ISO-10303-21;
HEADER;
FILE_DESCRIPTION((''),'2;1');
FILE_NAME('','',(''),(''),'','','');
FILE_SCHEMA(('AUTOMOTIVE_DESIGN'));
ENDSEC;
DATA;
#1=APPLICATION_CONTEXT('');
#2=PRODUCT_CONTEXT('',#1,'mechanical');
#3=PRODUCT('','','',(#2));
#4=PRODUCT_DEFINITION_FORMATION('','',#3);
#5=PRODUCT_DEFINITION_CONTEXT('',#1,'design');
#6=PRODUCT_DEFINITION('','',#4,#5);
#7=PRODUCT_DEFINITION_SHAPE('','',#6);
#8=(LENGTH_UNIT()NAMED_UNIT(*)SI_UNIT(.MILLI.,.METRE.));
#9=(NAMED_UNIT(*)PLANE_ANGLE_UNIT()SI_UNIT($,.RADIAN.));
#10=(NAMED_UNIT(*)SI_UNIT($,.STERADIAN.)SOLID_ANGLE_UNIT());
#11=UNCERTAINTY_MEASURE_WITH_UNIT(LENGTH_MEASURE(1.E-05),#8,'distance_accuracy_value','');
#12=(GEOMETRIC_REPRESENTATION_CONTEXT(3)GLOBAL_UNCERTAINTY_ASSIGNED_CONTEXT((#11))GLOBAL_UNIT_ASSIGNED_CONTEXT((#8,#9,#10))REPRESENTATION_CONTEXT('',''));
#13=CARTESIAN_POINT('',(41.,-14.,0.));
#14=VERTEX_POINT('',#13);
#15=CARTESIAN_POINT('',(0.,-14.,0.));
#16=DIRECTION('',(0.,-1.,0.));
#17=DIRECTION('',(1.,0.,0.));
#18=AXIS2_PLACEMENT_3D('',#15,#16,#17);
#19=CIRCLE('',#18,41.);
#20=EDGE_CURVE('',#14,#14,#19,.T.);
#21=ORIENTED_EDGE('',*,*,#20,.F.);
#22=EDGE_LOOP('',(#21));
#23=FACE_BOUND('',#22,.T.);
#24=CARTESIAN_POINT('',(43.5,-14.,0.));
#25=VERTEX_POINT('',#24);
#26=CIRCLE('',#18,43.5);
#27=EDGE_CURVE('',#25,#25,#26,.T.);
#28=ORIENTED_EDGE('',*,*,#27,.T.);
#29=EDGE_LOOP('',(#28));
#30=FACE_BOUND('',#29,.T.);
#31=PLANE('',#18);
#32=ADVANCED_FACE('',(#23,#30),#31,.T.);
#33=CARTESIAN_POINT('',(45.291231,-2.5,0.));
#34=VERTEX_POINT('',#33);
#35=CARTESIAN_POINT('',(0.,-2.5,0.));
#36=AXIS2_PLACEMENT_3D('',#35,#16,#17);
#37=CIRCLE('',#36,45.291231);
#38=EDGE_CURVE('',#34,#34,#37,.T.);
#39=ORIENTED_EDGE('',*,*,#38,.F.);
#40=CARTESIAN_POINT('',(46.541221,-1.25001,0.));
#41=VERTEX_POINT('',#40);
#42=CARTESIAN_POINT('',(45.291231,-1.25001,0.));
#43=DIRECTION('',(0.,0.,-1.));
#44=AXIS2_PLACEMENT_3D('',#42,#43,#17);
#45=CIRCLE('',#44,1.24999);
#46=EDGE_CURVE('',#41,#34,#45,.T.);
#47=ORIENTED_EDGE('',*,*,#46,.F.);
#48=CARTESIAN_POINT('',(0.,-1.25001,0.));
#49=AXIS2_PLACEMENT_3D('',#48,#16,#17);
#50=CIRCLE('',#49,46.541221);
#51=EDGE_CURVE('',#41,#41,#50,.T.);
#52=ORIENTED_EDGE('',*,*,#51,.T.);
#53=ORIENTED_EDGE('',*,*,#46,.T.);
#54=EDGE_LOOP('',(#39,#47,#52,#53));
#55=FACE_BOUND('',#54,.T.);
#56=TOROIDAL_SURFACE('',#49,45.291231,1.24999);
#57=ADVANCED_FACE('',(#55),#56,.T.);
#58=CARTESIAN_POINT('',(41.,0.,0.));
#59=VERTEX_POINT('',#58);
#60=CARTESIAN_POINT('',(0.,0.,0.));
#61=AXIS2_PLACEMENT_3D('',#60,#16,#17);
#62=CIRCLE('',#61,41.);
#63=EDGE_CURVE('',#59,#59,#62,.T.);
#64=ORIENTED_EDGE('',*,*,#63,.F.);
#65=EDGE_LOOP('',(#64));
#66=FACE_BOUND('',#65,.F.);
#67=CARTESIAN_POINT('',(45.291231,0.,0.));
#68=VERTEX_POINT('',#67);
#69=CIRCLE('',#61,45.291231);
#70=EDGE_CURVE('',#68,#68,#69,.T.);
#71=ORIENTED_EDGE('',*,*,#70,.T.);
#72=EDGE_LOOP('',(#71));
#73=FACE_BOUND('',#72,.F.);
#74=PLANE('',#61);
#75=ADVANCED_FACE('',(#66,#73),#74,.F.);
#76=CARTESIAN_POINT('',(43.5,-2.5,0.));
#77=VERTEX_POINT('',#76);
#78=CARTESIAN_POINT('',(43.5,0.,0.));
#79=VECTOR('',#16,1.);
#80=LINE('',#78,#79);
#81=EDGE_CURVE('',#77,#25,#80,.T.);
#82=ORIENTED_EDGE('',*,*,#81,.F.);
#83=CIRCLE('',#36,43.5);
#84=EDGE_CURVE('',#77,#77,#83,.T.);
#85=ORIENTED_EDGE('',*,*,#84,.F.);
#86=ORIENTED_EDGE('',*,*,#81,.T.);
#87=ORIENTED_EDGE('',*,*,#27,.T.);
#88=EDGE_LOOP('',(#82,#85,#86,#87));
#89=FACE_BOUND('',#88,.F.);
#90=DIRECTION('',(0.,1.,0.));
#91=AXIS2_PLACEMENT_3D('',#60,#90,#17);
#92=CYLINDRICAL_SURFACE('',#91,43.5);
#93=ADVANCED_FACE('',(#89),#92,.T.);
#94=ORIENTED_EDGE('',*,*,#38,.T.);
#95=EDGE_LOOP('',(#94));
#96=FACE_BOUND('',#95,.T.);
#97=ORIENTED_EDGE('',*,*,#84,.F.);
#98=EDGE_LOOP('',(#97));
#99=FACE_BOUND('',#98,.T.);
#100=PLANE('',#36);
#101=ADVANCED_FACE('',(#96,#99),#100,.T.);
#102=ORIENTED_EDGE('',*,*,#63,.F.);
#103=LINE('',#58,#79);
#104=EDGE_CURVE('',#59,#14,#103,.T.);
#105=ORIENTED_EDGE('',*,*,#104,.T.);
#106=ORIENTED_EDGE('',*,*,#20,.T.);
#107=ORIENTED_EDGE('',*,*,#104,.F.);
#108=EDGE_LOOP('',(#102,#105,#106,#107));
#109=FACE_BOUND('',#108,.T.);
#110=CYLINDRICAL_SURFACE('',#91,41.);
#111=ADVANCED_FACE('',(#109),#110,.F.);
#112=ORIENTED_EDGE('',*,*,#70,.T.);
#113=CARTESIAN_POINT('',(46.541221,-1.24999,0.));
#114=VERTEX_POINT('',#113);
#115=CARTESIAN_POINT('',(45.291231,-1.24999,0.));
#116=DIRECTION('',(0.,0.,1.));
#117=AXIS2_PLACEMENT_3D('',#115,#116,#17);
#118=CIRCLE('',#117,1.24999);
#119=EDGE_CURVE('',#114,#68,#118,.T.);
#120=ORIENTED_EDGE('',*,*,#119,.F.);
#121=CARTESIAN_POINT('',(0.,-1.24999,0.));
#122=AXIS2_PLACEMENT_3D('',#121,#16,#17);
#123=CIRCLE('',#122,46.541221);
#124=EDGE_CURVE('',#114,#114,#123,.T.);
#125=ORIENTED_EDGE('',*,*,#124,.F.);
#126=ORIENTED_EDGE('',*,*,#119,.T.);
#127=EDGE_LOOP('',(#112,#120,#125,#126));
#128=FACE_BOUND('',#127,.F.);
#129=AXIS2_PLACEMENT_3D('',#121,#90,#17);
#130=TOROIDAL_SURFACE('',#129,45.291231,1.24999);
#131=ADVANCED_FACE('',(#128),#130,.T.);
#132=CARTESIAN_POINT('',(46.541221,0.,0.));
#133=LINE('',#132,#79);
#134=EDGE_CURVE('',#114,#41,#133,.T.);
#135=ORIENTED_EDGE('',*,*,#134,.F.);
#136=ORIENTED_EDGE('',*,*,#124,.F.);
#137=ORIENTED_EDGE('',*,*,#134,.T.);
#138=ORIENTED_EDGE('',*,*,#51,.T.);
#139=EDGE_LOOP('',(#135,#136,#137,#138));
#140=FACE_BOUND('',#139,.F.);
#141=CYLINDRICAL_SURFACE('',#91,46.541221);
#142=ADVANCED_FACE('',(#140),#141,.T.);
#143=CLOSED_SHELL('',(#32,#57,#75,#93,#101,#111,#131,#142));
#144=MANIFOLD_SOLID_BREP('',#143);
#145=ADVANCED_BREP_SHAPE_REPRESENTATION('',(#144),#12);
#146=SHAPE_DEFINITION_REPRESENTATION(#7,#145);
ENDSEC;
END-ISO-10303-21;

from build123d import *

# Parameters (mm, degrees)
F0_R     = 43.5
F0_R_2   = 41
F1_DEPTH = 14
F0_R_3   = 46.5412209473
F2_DEPTH = 2.5
F3_R     = 1.24999


# Not quite as in the source:
# - a fillet or chamfer is up to 0.001 mm smaller than in the source, because OpenCascade refuses the exact size


with BuildPart() as f1:
    # F0 (on Front) → F1 (new body)
    with BuildSketch(Plane.XZ):
        Circle(F0_R)
        Circle(F0_R_2, mode=Mode.SUBTRACT)
    extrude(amount=F1_DEPTH)

    # F0 (on Front) → F2 (join)
    with BuildSketch(Plane.XZ):
        Circle(F0_R_3)
        Circle(F0_R, mode=Mode.SUBTRACT)
    extrude(amount=F2_DEPTH)

    # F3 (radius 1.25 in the source; OpenCascade refuses exactly that, so slightly less here)
    f3_edges = [f1.edges().sort_by_distance(p)[0] for p in [
        (-46.541221, -2.5, 0),
        (-46.541221, 0, 0),
    ]]
    fillet(f3_edges, radius=F3_R)


solid = f1.part
